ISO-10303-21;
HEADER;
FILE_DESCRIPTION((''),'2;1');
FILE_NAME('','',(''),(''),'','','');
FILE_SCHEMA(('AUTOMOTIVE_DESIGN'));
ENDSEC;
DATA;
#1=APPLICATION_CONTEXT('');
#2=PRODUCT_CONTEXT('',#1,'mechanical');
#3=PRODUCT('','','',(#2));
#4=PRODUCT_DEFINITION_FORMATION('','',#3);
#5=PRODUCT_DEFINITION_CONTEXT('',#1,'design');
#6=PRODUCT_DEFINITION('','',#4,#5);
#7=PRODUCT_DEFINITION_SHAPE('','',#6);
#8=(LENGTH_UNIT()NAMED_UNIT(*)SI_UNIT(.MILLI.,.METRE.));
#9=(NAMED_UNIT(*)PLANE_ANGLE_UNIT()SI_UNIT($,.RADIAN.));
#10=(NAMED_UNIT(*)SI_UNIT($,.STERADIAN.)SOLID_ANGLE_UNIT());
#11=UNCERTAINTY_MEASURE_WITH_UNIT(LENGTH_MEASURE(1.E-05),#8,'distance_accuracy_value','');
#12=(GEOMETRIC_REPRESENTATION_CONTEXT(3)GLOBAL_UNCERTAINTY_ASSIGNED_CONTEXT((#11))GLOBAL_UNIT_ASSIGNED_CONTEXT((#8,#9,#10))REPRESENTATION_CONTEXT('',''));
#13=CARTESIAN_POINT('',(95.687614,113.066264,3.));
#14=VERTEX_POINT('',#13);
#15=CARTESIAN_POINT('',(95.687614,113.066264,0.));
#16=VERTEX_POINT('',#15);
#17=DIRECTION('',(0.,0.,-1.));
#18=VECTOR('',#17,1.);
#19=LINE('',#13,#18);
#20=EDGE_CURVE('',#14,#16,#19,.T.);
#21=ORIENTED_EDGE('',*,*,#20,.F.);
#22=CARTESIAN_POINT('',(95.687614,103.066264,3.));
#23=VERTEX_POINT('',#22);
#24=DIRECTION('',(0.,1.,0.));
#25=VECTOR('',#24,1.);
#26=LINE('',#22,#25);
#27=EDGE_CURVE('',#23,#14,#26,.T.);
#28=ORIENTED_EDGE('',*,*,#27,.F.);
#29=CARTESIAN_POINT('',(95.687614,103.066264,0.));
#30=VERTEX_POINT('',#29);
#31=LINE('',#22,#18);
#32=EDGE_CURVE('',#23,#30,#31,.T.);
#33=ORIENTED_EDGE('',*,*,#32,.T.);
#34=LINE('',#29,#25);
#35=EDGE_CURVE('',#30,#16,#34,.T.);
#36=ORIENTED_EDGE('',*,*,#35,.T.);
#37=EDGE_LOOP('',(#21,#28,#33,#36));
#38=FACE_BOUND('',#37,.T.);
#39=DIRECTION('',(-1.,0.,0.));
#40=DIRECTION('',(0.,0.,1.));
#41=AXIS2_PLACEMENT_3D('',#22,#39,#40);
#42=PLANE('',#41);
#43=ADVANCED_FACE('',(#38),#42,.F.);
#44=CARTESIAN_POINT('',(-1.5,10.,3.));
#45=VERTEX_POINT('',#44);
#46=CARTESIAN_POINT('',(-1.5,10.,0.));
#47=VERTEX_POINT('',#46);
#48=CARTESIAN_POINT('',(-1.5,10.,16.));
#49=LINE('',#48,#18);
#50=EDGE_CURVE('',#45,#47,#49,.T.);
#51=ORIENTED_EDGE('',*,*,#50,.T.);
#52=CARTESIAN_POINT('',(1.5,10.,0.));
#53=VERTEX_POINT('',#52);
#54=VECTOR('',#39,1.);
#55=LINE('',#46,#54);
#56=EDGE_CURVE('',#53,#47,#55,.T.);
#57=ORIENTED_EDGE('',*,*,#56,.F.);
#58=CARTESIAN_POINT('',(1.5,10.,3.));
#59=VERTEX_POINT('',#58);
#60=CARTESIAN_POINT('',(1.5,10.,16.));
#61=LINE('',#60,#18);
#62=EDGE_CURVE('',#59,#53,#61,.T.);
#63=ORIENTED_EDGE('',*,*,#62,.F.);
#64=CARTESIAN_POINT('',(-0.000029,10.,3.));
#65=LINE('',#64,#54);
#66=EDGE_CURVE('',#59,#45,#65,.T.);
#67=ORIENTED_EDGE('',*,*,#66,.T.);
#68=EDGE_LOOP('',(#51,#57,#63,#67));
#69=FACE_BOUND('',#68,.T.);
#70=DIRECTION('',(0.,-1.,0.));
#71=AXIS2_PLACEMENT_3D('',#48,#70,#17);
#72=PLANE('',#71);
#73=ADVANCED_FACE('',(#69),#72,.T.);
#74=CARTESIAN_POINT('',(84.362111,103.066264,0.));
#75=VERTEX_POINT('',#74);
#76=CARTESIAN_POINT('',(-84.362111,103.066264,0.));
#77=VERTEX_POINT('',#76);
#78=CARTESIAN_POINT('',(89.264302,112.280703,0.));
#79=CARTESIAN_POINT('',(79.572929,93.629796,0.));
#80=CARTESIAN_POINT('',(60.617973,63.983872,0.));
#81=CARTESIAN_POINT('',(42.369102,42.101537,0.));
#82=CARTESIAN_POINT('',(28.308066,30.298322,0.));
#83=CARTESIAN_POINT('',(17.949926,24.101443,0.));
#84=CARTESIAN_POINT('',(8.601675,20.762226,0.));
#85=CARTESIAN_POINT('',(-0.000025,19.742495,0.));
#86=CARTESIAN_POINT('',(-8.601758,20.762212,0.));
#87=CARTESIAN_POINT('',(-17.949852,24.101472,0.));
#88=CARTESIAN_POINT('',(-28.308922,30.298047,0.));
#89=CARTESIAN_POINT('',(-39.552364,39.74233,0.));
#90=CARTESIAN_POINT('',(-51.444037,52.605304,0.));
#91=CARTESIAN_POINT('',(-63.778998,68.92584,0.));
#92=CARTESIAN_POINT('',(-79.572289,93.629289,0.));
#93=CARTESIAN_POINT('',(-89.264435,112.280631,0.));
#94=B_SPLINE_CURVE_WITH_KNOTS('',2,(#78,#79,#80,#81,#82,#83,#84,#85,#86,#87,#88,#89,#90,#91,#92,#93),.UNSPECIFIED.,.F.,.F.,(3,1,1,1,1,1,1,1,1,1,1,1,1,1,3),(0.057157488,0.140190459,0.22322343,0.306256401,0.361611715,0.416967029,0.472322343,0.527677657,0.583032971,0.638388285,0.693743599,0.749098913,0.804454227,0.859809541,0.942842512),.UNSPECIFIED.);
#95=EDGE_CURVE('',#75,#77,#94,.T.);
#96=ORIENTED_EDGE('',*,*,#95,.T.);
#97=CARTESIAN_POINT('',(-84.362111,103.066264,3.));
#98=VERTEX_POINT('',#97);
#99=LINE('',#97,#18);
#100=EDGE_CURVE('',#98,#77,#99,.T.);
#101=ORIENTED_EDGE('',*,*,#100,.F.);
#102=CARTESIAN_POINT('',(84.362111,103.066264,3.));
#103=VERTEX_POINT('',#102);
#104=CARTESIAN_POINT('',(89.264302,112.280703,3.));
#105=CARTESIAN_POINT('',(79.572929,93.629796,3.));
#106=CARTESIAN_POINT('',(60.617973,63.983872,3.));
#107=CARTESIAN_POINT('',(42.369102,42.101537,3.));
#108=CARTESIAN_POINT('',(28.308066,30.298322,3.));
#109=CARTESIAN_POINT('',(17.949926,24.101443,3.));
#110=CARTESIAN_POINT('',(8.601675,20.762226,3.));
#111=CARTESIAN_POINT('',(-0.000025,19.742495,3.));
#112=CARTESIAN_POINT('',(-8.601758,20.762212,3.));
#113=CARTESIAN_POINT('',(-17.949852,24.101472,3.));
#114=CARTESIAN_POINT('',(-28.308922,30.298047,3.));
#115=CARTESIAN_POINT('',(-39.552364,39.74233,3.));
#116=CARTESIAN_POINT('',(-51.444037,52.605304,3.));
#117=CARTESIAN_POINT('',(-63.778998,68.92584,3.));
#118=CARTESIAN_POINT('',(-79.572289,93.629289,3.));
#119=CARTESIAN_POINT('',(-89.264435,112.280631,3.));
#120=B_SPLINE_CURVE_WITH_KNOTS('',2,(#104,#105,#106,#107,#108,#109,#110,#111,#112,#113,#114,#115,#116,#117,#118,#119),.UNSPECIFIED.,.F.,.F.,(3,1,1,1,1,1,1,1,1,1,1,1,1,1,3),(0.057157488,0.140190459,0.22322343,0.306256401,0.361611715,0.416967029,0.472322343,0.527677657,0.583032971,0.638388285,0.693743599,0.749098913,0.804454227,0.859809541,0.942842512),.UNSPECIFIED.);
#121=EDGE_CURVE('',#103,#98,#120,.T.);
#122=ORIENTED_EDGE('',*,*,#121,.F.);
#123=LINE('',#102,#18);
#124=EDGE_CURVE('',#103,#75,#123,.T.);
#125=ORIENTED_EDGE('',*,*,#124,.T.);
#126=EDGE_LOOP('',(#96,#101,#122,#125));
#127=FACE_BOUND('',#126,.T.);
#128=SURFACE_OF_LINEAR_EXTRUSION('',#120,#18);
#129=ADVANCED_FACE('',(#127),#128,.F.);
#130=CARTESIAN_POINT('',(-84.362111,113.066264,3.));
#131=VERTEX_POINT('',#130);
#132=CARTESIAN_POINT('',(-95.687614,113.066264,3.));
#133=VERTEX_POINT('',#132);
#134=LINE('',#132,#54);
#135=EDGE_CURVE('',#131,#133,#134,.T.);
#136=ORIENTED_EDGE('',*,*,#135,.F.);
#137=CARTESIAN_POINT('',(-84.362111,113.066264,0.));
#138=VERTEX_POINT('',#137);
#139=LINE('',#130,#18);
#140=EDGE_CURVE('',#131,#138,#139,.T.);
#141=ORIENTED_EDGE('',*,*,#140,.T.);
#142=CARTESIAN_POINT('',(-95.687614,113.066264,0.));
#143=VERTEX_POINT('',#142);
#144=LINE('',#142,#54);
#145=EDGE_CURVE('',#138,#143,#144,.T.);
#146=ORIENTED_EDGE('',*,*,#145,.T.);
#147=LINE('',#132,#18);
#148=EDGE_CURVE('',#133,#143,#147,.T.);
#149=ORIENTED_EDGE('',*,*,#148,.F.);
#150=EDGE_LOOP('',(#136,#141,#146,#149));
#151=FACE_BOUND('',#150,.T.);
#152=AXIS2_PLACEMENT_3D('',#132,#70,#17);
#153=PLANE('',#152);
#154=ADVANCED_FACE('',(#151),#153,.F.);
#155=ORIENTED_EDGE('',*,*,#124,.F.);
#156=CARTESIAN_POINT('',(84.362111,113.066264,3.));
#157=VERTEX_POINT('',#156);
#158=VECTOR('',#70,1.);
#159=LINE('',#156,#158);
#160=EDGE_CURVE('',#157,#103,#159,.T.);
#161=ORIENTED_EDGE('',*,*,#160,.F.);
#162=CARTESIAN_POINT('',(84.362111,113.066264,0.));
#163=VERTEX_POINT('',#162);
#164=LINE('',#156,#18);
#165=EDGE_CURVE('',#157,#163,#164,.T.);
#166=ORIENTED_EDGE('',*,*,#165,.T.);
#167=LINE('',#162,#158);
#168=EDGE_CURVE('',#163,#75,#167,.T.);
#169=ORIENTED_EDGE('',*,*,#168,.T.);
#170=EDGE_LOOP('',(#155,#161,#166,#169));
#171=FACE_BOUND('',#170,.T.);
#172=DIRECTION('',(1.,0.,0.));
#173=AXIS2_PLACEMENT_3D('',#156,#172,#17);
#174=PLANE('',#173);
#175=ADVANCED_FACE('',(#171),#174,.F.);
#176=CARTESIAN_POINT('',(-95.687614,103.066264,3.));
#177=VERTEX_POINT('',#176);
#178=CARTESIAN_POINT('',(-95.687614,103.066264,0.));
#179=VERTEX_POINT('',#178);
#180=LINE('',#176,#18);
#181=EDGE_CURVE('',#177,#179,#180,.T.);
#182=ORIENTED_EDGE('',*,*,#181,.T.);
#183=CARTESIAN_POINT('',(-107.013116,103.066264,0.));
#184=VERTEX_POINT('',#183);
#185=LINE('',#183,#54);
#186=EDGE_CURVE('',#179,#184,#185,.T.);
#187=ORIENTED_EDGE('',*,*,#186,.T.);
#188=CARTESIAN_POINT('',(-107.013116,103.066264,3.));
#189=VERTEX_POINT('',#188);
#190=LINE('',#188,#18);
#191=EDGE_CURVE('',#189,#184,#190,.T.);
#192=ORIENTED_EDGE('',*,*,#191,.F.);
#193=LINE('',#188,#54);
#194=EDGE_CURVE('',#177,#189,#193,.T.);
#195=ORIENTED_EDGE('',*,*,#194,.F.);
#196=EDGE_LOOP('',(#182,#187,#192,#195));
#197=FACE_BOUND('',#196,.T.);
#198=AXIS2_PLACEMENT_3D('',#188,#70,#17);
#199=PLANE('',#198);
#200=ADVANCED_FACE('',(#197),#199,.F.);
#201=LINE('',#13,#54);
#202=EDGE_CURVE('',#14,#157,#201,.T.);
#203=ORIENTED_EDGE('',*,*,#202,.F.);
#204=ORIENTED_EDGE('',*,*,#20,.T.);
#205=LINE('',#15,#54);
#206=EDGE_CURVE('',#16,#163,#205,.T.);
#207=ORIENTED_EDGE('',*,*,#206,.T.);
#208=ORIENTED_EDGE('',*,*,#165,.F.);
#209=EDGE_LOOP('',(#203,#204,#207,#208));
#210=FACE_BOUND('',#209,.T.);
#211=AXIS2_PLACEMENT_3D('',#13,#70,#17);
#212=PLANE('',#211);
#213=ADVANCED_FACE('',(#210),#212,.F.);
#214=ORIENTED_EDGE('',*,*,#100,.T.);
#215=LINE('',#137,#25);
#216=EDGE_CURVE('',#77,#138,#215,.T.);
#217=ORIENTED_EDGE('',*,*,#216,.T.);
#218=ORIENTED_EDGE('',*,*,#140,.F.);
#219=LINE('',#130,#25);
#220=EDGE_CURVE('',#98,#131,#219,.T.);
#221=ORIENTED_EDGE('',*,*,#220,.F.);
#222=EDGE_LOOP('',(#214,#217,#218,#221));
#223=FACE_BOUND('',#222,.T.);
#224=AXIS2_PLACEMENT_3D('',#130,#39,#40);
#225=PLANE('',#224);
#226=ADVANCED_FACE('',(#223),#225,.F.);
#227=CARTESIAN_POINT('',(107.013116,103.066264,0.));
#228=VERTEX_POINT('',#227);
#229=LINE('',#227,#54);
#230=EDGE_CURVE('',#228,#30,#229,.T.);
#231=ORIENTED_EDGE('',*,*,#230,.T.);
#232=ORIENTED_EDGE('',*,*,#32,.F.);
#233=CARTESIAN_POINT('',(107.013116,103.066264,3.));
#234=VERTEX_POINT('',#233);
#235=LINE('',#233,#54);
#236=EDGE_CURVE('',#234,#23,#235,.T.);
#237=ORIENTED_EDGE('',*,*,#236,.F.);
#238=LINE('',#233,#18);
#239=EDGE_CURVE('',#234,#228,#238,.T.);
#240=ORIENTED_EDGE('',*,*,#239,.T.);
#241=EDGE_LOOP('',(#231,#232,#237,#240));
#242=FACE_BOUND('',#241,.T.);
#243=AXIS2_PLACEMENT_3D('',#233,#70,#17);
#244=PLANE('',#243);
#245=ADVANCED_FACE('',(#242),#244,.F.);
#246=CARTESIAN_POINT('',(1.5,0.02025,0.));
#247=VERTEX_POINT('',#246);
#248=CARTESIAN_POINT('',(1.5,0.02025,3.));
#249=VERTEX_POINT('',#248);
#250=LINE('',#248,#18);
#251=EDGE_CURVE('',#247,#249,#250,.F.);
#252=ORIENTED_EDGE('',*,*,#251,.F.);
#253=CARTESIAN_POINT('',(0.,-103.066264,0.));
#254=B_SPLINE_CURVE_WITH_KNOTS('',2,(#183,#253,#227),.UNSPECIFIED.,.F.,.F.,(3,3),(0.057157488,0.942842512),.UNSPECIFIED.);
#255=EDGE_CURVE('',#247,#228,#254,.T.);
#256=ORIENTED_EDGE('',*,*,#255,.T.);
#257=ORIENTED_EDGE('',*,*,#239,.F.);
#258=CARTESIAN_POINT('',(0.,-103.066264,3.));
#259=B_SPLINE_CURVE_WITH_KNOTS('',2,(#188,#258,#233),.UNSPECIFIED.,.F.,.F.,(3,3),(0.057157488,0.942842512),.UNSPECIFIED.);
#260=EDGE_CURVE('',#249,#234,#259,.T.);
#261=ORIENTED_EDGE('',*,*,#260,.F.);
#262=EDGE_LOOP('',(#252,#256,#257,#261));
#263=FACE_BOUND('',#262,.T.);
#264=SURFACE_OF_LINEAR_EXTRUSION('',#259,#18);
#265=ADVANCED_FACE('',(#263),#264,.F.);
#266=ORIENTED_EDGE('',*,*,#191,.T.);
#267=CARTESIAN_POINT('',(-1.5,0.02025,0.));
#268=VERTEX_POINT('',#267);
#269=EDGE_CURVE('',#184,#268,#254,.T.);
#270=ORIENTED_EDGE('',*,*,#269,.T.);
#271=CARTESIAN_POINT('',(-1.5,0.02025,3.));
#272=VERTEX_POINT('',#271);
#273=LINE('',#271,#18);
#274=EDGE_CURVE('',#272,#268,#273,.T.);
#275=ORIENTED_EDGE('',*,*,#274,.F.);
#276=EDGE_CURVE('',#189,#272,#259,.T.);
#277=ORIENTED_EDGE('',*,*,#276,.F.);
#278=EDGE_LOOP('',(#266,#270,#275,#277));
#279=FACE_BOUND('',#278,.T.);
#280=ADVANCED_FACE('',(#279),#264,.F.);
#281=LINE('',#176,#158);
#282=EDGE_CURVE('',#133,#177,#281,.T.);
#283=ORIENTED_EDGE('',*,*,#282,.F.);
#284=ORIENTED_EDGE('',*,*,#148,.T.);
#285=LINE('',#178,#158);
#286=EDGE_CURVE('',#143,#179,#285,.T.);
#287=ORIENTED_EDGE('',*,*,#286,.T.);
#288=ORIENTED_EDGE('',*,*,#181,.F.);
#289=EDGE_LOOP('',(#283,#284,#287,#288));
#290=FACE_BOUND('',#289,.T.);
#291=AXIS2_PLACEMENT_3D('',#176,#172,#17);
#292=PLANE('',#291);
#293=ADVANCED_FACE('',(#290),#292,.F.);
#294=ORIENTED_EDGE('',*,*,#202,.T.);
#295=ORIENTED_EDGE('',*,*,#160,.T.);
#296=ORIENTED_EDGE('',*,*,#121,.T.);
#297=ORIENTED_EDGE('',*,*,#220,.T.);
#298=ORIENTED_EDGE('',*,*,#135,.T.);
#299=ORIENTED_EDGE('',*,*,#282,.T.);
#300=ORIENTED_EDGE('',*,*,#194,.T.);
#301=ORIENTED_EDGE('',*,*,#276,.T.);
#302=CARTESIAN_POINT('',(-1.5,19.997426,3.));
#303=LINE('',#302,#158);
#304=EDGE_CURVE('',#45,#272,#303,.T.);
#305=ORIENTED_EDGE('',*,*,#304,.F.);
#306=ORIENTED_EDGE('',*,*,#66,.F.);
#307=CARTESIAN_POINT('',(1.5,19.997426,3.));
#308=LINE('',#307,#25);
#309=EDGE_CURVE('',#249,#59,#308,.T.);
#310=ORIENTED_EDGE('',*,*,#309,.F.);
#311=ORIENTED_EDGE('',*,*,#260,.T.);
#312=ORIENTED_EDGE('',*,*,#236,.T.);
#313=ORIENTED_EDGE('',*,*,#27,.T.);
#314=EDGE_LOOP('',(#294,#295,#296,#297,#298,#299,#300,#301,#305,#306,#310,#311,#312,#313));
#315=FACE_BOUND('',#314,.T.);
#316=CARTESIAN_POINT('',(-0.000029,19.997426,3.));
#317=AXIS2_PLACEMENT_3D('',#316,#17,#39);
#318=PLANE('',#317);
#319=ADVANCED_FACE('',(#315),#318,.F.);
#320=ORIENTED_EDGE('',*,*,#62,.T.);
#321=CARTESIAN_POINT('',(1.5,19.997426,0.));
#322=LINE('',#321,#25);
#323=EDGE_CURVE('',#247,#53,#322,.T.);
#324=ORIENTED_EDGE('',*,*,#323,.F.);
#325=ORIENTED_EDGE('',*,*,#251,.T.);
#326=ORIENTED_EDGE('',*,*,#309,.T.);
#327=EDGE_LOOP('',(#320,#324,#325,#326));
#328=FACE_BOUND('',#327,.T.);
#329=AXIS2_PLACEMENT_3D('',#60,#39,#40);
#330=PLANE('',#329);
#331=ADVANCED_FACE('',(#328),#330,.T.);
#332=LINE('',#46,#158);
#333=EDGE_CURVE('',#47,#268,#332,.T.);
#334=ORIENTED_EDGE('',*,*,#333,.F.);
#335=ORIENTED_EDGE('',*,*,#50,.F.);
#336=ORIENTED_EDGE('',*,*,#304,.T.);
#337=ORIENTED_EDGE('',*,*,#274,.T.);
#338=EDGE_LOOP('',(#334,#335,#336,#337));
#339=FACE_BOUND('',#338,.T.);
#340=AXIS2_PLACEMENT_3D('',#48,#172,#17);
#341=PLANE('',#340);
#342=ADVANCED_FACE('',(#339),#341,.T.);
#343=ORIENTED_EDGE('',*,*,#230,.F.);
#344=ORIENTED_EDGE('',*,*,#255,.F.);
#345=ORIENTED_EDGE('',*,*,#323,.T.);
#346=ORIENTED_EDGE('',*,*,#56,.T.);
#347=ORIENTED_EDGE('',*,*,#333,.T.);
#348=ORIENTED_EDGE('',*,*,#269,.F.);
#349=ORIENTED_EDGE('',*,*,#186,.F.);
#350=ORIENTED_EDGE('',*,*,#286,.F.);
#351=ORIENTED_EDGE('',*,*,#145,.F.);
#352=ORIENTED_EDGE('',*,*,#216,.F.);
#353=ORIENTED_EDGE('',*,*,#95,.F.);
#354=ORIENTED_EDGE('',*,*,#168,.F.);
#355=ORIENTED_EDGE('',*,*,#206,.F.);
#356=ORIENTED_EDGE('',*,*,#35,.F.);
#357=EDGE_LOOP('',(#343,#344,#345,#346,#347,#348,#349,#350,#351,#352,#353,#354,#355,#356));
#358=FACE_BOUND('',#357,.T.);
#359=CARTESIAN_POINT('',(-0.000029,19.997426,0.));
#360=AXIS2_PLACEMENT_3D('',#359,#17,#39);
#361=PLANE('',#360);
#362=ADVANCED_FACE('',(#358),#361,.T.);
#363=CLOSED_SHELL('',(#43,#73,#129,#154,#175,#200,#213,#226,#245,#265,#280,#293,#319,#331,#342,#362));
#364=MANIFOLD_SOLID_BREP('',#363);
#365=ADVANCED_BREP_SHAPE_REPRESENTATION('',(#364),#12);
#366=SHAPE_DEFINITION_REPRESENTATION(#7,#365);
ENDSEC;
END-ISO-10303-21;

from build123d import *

# Parameters (mm, degrees)
BOSS_EXTRUDE1_DEPTH = 3
SKETCH2_W           = 3
SKETCH2_H           = 11.487699198
CUT_EXTRUDE1_DEPTH  = 16


# Read off the part's stored shape, not the designer's step: Boss-Extrude1
with BuildPart() as part:
    # Boss-Extrude1 outline → Boss-Extrude1 (new body)
    with BuildSketch(Plane.XY):
        with BuildLine():
            Line((-95.687613819, 113.066263652), (-95.687613819, 103.066263652))
            Line((-95.687613819, 103.066263652), (-107.013116357, 103.066263652))
            add(Edge.make_bspline(
                [(-107.013116357, 103.066263652), (0, -103.066263652), (107.013116357, 103.066263652)],
                knots=[0.057157488, 0.057157488, 0.057157488, 0.942842512, 0.942842512, 0.942842512], degree=2))
            Line((107.013116357, 103.066263652), (95.68761382, 103.066263652))
            Line((95.68761382, 103.066263652), (95.68761382, 113.066263652))
            Line((95.68761382, 113.066263652), (84.362111282, 113.066263652))
            Line((84.362111282, 113.066263652), (84.362111282, 103.066263652))
            add(Edge.make_bspline(
                [(84.362111282, 103.066263652), (77.169203523, 89.870321464), (60.617973136, 63.983872026), (42.369102372, 42.101536817), (28.30806557, 30.298322138), (17.949926074, 24.101443082), (8.601675425, 20.762226356), (-2.4893e-05, 19.742494759), (-8.601757959, 20.762212203), (-17.949851697, 24.101471728), (-28.308921959, 30.298047433), (-39.552364136, 39.742329541), (-51.44403726, 52.605304358), (-63.778998477, 68.925840315), (-77.169000129, 89.870127882), (-84.362111282, 103.066263652)],
                knots=[0.078216729, 0.078216729, 0.078216729, 0.140190459, 0.22322343, 0.306256401, 0.361611715, 0.416967029, 0.472322343, 0.527677657, 0.583032971, 0.638388285, 0.693743599, 0.749098913, 0.804454227, 0.859809541, 0.921783758, 0.921783758, 0.921783758], degree=2))
            Line((-84.362111282, 103.066263652), (-84.362111282, 113.066263652))
            Line((-84.362111282, 113.066263652), (-95.687613819, 113.066263652))
        make_face()
    extrude(amount=BOSS_EXTRUDE1_DEPTH)

    # Sketch2 → Cut-Extrude1 (cut)
    with BuildSketch(Plane.XY):
        with Locations((0, 4.256150401)):
            Rectangle(SKETCH2_W, SKETCH2_H)
    extrude(amount=CUT_EXTRUDE1_DEPTH, mode=Mode.SUBTRACT)


solid = part.part
